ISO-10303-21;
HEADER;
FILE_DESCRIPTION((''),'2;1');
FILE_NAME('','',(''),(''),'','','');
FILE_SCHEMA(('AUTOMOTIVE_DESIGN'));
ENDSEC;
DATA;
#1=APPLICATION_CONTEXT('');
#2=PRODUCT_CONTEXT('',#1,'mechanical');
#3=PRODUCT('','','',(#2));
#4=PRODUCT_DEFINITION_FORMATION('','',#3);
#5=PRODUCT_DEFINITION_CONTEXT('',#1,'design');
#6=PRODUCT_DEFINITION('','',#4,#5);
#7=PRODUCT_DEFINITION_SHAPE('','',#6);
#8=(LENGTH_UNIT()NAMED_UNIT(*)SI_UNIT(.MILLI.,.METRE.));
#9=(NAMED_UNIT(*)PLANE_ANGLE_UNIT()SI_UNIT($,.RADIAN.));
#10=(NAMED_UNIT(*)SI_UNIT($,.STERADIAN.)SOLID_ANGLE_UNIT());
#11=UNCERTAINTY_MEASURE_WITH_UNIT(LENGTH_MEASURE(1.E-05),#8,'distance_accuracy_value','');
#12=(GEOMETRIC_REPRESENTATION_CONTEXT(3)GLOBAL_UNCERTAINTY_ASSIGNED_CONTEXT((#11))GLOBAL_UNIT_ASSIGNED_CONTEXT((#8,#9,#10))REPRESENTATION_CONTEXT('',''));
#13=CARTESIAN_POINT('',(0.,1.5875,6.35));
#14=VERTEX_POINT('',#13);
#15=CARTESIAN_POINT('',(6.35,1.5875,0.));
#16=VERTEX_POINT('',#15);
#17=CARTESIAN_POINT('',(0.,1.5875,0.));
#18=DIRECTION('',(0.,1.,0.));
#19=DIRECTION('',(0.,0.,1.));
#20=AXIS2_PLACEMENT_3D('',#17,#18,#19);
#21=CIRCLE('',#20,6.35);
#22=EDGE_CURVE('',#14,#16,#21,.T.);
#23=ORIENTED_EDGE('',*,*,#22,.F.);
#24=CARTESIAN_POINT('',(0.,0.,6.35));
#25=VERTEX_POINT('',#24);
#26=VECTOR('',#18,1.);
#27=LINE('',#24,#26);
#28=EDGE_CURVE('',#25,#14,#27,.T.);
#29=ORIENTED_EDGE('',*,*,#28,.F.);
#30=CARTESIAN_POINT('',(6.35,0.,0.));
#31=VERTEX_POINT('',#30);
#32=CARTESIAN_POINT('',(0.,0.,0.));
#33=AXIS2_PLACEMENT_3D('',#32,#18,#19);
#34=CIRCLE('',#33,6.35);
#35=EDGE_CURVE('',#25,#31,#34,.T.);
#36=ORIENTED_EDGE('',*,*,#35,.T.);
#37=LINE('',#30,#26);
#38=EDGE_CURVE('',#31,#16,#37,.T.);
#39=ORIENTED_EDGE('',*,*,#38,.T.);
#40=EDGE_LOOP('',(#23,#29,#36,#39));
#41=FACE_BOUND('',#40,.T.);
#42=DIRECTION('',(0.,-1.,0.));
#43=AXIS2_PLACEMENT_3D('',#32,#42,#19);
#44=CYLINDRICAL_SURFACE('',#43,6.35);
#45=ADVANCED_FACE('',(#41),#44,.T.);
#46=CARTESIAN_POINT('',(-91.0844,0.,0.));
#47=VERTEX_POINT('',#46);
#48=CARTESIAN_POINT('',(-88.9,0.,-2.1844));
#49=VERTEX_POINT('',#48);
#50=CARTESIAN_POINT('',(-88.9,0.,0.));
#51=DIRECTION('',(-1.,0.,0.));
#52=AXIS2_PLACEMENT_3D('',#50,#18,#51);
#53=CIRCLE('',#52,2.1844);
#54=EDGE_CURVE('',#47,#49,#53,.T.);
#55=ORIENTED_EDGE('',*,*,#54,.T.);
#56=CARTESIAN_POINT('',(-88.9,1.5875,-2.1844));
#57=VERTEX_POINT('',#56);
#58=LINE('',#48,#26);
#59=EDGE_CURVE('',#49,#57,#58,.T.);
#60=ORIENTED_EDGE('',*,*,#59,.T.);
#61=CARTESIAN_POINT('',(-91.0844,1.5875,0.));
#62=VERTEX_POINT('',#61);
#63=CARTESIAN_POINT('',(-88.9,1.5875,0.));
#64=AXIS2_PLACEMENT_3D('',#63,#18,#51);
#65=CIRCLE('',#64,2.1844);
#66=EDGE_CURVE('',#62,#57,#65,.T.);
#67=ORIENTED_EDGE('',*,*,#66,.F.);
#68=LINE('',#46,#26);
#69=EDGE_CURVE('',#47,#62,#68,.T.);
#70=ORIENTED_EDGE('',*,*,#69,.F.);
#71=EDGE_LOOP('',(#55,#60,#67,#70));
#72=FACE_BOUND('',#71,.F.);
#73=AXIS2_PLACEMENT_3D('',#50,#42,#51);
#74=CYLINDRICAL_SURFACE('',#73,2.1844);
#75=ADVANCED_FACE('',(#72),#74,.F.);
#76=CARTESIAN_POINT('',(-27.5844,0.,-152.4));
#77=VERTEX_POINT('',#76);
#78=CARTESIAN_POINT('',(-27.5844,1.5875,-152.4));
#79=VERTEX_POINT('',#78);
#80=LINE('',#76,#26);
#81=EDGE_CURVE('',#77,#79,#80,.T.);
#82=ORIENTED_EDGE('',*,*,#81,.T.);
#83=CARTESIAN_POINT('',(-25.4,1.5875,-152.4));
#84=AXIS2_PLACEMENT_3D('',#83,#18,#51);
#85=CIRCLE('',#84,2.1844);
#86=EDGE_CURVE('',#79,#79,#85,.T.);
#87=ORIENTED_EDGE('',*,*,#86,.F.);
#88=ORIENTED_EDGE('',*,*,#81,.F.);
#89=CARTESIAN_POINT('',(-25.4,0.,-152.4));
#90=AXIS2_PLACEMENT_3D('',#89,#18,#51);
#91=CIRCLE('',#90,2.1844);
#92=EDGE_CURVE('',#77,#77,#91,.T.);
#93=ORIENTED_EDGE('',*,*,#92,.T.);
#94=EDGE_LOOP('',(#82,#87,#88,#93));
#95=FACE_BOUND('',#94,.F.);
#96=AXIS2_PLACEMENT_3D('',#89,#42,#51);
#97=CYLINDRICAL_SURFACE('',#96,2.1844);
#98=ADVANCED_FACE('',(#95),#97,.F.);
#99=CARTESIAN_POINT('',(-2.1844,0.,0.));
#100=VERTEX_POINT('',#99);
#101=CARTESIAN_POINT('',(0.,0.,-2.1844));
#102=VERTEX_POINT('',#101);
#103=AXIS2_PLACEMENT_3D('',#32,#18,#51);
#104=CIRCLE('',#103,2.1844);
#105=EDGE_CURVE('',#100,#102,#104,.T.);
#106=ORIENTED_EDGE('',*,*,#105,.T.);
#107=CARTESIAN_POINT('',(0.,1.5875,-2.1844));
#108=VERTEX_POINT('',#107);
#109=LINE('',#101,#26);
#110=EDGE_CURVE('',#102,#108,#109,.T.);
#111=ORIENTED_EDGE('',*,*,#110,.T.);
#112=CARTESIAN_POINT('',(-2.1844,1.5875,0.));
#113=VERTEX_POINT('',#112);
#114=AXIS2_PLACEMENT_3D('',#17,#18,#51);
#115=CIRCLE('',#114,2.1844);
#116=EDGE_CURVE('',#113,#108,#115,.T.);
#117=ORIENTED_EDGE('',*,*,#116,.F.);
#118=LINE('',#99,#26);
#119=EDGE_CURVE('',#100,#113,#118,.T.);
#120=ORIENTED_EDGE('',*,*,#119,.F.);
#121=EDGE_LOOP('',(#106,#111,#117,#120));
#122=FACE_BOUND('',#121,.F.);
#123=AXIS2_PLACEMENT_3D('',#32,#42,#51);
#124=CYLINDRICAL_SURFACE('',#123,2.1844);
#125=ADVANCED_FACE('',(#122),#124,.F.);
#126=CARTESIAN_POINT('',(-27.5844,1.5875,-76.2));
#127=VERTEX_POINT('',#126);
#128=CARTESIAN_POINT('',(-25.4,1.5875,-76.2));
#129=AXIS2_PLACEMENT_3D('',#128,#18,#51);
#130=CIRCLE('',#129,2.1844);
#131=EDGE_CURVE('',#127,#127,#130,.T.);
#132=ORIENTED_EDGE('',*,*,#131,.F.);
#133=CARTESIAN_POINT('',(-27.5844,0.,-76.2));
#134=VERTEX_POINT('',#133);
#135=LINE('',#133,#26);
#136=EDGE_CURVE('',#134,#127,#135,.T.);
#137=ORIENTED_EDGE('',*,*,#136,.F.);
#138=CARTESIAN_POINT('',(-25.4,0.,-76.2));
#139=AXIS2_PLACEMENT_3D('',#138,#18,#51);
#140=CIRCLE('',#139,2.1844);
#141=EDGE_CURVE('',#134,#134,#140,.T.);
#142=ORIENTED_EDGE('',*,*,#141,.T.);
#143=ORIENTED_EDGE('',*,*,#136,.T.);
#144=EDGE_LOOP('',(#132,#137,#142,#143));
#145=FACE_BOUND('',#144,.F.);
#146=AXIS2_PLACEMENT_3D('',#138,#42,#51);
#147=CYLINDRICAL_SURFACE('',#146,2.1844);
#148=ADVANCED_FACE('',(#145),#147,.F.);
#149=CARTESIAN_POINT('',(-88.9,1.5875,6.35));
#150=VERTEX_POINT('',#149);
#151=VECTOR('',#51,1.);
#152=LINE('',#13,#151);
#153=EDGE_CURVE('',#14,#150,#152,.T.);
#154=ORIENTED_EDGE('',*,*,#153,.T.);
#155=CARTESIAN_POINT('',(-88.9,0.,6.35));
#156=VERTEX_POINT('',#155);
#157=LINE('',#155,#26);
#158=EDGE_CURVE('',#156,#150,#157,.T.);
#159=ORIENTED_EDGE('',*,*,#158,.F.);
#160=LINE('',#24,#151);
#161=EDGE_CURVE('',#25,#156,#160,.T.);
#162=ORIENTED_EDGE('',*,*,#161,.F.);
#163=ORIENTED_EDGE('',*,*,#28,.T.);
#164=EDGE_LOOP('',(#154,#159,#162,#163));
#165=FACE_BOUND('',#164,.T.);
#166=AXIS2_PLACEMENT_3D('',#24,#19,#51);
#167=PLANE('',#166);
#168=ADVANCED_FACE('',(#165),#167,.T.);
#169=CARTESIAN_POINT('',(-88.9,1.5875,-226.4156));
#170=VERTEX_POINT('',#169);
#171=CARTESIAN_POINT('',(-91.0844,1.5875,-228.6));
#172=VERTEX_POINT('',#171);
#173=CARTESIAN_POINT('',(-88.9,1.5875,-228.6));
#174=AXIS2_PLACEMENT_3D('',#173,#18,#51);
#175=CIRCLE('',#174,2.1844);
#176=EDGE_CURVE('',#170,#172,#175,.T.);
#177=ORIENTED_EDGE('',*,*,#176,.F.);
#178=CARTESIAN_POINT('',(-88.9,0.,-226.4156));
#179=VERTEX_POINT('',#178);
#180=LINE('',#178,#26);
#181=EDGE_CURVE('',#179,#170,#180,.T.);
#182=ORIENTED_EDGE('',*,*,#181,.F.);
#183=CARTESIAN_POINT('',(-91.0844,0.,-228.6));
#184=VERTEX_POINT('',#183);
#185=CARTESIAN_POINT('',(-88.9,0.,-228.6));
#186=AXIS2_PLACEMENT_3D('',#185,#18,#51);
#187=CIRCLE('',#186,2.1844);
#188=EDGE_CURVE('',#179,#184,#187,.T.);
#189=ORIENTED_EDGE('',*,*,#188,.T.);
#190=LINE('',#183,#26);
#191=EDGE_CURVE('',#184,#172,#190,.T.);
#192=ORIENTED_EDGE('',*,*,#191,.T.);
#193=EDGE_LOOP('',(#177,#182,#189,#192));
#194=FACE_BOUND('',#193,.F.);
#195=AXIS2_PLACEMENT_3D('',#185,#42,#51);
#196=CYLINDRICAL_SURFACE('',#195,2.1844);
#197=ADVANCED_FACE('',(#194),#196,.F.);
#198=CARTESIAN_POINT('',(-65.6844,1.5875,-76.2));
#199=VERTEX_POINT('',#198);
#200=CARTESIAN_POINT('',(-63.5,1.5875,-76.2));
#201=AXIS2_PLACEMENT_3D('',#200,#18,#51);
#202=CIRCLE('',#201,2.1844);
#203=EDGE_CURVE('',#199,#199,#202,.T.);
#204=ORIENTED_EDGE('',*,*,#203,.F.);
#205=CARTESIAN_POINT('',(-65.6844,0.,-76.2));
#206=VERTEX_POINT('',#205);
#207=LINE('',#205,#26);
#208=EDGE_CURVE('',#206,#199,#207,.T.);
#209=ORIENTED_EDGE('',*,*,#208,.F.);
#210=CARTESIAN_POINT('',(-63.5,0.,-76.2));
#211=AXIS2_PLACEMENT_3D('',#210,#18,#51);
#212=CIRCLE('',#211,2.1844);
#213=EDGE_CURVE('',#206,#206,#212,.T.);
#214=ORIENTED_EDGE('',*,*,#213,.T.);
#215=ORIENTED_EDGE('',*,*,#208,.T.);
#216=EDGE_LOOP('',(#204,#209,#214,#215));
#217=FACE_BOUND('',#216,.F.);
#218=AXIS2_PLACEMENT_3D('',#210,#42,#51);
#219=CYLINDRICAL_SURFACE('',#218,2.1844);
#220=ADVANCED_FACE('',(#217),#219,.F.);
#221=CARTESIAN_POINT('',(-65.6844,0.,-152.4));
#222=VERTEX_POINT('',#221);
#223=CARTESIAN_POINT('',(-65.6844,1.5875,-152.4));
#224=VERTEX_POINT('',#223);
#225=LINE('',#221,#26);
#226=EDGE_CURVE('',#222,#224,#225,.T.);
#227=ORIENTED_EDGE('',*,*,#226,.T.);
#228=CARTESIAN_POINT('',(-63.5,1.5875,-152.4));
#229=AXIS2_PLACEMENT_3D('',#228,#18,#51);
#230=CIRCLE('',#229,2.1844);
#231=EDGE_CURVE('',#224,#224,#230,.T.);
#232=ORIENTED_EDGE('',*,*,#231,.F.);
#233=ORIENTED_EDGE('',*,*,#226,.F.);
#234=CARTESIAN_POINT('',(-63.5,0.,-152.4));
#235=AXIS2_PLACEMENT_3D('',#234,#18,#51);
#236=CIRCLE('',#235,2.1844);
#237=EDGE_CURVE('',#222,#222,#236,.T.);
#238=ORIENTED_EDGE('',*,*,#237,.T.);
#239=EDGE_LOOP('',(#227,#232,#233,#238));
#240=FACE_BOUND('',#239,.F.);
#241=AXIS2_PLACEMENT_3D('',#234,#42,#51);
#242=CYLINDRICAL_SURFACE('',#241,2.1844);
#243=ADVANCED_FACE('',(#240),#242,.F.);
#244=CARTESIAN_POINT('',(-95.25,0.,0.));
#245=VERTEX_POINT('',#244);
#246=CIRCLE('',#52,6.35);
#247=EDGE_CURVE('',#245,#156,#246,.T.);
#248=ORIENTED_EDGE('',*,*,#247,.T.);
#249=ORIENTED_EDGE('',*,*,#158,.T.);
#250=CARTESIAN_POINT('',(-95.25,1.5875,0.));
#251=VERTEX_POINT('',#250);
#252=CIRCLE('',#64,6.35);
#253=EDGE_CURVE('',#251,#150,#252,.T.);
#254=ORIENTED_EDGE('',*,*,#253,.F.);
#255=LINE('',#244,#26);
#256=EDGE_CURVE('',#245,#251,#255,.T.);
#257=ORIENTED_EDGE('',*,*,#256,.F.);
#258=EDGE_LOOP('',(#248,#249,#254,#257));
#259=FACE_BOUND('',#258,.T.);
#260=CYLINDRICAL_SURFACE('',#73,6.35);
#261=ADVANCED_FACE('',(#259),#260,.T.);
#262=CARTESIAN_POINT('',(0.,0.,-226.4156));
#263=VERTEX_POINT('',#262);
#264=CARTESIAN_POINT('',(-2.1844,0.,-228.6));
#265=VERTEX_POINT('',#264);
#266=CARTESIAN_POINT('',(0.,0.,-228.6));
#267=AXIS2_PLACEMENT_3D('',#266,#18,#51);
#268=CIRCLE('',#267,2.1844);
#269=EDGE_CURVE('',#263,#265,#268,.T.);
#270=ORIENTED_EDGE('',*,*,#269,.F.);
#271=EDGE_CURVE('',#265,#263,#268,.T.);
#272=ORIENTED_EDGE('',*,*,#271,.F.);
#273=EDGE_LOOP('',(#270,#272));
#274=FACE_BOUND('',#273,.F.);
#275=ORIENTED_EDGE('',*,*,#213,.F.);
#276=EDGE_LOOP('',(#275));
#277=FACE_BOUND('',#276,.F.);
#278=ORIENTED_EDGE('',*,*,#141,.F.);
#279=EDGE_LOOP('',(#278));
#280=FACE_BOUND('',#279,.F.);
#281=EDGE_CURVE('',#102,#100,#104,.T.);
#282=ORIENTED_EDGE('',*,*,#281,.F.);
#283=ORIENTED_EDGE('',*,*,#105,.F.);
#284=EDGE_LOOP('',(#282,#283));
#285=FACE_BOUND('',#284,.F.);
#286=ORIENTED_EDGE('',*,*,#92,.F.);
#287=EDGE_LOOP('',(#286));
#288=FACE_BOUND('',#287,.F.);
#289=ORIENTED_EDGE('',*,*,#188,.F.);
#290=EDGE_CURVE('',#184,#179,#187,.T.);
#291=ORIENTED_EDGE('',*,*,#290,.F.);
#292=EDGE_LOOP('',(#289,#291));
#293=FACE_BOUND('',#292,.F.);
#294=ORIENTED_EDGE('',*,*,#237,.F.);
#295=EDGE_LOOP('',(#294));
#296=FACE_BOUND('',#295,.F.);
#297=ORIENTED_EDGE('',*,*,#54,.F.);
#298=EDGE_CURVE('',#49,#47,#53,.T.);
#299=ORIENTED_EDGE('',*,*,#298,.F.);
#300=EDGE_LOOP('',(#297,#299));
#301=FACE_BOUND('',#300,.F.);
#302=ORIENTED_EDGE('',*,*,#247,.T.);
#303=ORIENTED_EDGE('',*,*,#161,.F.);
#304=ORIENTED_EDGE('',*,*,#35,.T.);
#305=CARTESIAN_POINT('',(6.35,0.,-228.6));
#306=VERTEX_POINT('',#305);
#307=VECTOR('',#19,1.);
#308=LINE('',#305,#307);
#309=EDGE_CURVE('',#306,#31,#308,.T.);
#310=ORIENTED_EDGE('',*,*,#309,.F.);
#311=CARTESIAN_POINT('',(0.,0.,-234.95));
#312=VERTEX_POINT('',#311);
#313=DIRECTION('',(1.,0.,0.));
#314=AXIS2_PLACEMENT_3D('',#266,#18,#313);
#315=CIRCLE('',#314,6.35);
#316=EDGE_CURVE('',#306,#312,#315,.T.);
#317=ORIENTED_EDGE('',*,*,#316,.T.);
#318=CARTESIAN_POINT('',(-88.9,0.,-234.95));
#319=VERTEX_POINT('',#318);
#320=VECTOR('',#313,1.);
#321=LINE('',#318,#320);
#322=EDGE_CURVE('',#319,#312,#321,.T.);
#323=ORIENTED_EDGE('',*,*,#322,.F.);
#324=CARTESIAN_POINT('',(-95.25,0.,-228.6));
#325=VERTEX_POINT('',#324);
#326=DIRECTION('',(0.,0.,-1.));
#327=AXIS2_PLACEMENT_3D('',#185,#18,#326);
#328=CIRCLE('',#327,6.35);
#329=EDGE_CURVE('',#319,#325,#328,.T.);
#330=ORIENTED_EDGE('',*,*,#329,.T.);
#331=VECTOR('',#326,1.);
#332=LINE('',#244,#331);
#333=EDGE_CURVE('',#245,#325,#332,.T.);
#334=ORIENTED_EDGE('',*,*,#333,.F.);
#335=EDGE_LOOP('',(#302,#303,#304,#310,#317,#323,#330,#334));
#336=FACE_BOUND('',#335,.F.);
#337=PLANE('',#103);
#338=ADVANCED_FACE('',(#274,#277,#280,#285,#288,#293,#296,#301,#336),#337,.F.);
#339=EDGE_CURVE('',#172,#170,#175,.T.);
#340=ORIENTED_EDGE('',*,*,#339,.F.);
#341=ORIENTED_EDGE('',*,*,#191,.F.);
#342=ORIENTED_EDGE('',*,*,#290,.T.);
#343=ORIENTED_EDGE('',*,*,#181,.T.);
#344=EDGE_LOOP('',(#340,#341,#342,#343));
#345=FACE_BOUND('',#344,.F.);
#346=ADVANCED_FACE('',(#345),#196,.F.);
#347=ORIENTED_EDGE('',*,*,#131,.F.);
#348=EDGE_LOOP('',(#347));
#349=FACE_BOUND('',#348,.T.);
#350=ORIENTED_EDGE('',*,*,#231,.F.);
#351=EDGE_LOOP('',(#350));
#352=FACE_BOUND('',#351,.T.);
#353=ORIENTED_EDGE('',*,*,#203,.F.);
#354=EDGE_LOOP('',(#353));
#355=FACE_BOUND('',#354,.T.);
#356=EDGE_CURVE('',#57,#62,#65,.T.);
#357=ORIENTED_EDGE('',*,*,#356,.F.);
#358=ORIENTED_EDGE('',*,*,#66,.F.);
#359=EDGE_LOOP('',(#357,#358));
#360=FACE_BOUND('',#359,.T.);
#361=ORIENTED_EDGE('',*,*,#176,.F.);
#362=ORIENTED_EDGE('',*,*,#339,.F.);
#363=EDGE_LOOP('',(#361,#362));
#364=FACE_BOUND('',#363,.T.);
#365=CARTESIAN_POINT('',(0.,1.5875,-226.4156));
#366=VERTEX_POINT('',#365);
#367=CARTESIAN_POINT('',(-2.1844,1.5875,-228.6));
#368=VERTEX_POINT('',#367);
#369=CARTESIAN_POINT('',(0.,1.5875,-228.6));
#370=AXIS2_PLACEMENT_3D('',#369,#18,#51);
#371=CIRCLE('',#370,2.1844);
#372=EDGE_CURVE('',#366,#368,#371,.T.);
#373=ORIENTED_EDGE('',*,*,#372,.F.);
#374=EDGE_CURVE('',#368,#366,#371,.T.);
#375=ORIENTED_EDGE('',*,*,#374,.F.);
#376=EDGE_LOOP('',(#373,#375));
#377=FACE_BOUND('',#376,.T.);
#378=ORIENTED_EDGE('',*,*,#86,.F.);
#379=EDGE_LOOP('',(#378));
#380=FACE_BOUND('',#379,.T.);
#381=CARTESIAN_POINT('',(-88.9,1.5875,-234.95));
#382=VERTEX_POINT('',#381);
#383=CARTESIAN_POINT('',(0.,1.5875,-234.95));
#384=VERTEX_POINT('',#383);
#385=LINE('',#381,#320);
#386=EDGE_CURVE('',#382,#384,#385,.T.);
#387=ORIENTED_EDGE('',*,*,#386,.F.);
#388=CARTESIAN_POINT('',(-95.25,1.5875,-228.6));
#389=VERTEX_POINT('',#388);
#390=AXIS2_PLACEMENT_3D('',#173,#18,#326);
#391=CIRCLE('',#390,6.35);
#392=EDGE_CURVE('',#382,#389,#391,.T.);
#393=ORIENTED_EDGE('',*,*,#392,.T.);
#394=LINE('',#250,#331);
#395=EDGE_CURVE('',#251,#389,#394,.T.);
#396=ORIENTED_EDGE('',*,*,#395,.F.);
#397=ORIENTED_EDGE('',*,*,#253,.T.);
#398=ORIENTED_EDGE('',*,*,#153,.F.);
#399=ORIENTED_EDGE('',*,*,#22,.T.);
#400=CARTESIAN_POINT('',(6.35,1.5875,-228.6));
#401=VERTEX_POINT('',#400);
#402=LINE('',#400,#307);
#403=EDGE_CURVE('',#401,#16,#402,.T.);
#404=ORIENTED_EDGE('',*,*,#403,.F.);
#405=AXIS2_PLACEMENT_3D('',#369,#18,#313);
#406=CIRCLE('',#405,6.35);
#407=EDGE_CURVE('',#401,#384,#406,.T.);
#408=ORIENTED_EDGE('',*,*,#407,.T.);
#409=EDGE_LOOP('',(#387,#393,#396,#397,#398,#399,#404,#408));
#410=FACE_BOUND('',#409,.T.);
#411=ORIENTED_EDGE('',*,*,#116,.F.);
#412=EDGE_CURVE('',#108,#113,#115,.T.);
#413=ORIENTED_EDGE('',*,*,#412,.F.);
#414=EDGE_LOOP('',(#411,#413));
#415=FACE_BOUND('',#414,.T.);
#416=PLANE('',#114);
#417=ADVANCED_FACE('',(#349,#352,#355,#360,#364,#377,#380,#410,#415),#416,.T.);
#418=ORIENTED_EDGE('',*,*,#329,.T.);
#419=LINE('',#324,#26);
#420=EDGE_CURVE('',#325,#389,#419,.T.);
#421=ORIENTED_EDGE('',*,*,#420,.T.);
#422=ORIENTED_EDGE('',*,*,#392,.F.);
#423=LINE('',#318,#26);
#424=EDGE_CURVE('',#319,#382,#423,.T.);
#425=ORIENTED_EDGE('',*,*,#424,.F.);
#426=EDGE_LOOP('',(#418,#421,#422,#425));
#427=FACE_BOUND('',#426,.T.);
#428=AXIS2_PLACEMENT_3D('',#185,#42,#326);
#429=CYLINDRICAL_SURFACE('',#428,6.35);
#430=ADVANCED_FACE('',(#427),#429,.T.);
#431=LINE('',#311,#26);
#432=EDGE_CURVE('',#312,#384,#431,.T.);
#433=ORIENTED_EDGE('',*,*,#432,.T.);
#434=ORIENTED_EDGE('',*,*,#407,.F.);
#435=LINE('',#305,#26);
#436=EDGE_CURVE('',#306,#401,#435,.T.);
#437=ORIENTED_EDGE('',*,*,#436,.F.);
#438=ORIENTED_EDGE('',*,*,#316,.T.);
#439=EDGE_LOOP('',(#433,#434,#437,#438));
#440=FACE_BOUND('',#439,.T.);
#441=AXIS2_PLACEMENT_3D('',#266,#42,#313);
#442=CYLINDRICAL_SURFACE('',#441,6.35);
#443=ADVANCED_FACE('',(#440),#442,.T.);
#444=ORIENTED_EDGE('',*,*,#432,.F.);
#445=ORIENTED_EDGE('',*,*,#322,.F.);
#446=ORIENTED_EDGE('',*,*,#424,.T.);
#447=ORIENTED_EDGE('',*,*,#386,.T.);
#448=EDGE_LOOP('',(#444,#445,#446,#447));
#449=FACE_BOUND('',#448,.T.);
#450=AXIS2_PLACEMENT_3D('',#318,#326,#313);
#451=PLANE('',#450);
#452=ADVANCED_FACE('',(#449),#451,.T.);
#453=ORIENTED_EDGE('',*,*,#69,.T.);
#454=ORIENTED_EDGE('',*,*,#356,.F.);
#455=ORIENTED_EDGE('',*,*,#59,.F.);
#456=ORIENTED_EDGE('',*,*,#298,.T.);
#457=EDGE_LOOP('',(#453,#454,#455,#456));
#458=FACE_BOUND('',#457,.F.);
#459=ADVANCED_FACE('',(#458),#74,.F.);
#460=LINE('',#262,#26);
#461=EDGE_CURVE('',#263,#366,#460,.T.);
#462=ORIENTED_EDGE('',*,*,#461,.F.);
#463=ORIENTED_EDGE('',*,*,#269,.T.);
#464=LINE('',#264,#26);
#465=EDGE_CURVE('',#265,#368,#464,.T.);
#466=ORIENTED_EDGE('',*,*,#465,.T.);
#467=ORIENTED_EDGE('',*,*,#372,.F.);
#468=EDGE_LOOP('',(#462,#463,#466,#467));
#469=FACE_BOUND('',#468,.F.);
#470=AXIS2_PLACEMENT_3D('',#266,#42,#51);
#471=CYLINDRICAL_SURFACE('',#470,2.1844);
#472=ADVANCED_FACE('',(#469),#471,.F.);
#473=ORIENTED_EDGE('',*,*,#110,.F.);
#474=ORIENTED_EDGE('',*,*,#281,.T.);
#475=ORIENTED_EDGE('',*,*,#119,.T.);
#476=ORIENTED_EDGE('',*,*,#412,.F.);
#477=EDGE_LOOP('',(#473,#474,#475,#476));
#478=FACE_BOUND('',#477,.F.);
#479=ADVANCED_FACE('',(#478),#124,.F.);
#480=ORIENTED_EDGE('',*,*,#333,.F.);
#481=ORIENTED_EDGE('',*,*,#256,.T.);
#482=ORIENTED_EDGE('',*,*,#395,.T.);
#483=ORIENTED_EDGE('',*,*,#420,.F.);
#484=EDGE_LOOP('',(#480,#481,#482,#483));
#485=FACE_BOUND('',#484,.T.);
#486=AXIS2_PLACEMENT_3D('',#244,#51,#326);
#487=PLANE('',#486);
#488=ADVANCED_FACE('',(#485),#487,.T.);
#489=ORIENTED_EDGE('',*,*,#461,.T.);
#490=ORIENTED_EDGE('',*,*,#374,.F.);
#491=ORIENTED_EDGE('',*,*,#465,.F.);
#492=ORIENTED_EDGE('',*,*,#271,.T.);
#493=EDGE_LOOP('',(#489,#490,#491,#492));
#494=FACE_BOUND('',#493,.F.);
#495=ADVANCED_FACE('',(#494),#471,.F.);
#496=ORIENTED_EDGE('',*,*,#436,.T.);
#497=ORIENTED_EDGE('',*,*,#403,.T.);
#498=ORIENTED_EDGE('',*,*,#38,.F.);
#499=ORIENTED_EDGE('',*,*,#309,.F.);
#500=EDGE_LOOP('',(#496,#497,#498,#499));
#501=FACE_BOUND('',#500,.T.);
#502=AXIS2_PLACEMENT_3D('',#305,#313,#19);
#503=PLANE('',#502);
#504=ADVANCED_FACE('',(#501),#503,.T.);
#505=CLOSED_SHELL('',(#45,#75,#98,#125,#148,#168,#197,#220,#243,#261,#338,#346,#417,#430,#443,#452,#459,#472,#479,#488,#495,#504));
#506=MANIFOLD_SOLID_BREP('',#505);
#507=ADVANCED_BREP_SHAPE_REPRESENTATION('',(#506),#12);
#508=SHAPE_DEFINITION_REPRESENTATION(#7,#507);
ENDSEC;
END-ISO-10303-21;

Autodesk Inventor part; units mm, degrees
ref_plane "YZ Plane" through (0, 0, 0) normal (1, 0, 0) x (0, 1, 0)
ref_plane "XZ Plane" through (0, 0, 0) normal (0, 1, 0) x (-1, 0, 0)
ref_plane "XY Plane" through (0, 0, 0) normal (0, 0, 1) x (1, 0, 0)
sketch "Sketch1" plane through (0, 0, 0) normal (0, 1, 0) x (-1, 0, 0)
  circle A0 centre (0, 0) radius 2.1844
  circle A1 centre (0, -228.6) radius 2.1844
  circle A2 centre (88.9, 0) radius 2.1844
  circle A3 centre (88.9, -228.6) radius 2.1844
  circle A4 centre (63.5, -76.2) radius 2.1844
  circle A5 centre (63.5, -152.4) radius 2.1844
  circle A6 centre (25.4, -152.4) radius 2.1844
  circle A7 centre (25.4, -76.2) radius 2.1844
  line L0 (95.25, 0) -> (95.25, -228.6)
  line L1 (88.9, -234.95) -> (0, -234.95)
  line L2 (-6.35, -228.6) -> (-6.35, 0)
  line L3 (0, 6.35) -> (88.9, 6.35)
  arc A8 (95.25, 0) -> (88.9, 6.35) centre (88.9, 0) ccw
  arc A9 (88.9, -234.95) -> (95.25, -228.6) centre (88.9, -228.6) ccw
  arc A10 (-6.35, -228.6) -> (0, -234.95) centre (0, -228.6) ccw
  arc A11 (0, 6.35) -> (-6.35, 0) centre (0, 0) ccw
  line L4 (88.9, 0) -> (88.9, -228.6)
  line L5 (0, 0) -> (0, -228.6)
  point P0 (44.45, -114.3)
  point P1 (44.45, -114.3)
  dimension "d0" = 4.3688
  dimension "d2" = 4.3688
  dimension "d7" = 4.3688
  dimension "d8" = 4.3688
  dimension "d15" = 4.3688
  dimension "d16" = 4.3688
  dimension "d17" = 4.3688
  dimension "d18" = 4.3688
extrude "Extrusion1" add sketch "Sketch1" along normal blind 1.5875
properties part number "brainmount(pocketlater)"
